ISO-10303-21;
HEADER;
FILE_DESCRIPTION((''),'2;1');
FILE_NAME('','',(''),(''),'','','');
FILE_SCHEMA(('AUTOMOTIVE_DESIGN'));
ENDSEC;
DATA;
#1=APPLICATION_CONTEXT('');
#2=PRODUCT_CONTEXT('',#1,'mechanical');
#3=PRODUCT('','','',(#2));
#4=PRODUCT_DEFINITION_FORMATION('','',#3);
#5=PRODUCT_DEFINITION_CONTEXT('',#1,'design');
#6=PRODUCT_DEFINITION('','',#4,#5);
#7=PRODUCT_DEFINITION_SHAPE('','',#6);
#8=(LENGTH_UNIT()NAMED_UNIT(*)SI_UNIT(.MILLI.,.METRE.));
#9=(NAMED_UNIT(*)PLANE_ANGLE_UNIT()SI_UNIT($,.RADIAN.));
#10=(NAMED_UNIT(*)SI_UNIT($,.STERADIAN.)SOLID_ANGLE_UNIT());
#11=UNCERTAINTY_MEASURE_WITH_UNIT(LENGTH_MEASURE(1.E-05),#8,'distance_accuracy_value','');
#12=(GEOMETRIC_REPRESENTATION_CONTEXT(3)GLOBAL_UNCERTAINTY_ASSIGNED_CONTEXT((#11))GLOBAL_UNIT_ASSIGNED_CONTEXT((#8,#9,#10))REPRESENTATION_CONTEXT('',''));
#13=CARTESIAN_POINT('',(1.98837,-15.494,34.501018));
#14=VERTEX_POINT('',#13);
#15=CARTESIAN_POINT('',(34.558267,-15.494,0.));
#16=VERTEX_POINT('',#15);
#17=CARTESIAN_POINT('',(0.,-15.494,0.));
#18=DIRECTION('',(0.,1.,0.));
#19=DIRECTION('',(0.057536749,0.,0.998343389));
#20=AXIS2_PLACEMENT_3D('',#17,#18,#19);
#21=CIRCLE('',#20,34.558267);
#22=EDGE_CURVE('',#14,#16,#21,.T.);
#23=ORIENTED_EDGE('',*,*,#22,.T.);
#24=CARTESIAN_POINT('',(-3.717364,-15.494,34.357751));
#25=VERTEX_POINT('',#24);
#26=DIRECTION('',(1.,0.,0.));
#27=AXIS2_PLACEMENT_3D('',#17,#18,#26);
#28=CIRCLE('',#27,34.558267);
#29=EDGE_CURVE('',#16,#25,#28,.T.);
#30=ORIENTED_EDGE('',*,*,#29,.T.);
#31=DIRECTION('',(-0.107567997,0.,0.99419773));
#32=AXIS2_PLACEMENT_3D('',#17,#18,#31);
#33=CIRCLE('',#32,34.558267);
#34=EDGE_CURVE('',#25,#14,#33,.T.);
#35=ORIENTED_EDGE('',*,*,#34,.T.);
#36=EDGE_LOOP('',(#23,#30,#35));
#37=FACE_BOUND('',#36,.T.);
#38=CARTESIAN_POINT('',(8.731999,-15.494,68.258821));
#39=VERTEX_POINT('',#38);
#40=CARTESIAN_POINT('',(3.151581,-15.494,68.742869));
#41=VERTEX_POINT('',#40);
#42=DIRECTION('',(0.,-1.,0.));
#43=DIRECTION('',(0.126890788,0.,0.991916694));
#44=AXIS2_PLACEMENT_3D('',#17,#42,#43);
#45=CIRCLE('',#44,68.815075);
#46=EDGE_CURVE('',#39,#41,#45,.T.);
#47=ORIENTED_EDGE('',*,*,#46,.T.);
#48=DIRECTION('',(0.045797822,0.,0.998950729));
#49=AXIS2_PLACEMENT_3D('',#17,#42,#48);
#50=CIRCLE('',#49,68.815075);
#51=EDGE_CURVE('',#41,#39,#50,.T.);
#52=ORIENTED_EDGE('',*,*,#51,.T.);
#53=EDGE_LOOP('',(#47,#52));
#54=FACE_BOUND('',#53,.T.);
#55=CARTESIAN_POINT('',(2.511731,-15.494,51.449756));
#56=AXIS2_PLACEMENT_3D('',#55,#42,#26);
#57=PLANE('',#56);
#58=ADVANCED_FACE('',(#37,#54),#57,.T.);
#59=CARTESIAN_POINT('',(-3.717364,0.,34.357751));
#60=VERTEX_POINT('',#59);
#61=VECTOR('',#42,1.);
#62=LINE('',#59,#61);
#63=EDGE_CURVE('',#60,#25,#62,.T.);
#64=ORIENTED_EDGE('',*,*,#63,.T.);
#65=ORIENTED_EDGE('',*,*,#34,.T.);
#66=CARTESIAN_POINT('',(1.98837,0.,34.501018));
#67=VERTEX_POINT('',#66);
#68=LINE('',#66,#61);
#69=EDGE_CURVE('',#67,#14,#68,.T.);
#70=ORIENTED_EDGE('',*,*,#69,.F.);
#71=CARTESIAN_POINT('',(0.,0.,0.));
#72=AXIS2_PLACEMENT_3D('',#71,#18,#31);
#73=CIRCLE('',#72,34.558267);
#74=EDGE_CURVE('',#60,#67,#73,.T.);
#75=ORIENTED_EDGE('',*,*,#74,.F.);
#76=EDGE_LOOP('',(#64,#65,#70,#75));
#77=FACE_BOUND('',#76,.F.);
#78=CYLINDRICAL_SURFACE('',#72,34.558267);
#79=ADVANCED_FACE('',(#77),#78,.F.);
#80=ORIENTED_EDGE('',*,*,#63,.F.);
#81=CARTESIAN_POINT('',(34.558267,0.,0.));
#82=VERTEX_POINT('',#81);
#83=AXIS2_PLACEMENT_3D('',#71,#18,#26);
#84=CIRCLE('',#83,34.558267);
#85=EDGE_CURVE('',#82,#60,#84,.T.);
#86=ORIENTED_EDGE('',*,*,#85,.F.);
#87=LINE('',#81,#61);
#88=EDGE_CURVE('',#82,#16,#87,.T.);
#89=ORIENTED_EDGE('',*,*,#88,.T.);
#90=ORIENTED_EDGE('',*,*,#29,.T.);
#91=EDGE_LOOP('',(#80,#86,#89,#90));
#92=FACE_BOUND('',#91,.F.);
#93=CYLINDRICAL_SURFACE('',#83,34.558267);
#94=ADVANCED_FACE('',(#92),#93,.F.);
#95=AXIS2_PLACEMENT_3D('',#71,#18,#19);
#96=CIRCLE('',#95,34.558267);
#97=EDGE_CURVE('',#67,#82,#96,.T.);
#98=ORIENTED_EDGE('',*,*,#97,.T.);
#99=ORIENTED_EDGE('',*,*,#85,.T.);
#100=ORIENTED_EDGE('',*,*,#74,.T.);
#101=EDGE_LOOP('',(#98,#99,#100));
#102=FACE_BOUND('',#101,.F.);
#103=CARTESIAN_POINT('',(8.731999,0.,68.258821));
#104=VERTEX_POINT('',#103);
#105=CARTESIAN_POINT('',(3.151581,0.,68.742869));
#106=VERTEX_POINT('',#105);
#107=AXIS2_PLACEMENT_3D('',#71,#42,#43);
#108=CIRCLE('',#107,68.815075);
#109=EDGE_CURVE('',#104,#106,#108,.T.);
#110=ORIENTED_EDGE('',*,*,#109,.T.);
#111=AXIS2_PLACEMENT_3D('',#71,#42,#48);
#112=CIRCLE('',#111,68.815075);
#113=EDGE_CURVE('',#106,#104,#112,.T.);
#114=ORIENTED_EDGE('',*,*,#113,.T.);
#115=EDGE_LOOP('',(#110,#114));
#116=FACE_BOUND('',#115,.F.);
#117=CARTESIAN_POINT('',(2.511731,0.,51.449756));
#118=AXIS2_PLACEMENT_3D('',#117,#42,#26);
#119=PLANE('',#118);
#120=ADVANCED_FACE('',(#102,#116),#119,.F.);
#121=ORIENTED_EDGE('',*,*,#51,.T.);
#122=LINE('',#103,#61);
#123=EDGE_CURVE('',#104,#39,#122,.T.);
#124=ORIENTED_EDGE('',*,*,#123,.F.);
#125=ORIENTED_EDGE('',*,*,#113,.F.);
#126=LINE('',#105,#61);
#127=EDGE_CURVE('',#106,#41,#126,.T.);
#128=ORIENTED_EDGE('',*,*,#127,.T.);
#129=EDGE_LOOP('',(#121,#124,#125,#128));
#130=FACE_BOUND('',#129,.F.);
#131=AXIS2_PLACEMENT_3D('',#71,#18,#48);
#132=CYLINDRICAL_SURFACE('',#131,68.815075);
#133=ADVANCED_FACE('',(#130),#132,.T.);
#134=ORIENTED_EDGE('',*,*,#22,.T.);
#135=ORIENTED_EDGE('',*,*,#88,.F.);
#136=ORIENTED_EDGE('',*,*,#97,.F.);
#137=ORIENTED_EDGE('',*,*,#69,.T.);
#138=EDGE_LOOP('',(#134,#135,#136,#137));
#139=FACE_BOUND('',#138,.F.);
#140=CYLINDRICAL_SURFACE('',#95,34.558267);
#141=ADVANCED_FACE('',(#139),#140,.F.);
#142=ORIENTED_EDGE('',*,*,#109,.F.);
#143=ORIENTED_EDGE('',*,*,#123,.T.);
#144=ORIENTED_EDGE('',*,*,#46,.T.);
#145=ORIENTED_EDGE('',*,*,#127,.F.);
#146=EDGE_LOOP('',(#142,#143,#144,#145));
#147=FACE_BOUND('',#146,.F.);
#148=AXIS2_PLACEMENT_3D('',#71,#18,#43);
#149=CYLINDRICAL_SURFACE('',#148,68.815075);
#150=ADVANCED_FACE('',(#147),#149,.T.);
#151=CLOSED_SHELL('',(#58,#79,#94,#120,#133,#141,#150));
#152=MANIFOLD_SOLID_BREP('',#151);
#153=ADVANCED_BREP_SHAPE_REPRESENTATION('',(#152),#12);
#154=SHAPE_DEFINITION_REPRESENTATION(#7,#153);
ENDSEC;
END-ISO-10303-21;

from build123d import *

# Parameters (mm, degrees)
F1_DEPTH = 15.494


# Not quite as in the source:
# - the program builds the solid bodies; features that only make, move or delete a surface that nothing else refers to are left out


with BuildPart() as f1:
    # F0 (on Front) → F1 (new body)
    with BuildSketch(Plane.XZ):
        with BuildLine():
            Line((1.9883703665, 34.5010177122), (8.7319990578, 68.2588214835))
            ThreePointArc((8.7319990578, 68.2588214835), (5.9467168888, 68.5576478309), (3.1515805748, 68.742869141))
            Line((3.1515805748, 68.742869141), (-3.7173636083, 34.3577509115))
            ThreePointArc((-3.7173636083, 34.3577509115), (-0.867459366, 34.5473783975), (1.9883703665, 34.5010177122))
        make_face()
        with BuildLine():
            ThreePointArc((3.1515805748, 68.742869141), (-49.7613844804, -47.5322956783), (68.8150747864, 0))
            ThreePointArc((68.8150747864, 0), (51.6546594513, 45.4676882503), (8.7319990578, 68.2588214835))
            Line((8.7319990578, 68.2588214835), (1.9883703665, 34.5010177122))
            ThreePointArc((1.9883703665, 34.5010177122), (25.1295490861, 23.7229762598), (34.5582673161, 0))
            ThreePointArc((34.5582673161, 0), (-23.0847156643, -25.717109919), (-3.7173636083, 34.3577509115))
            Line((-3.7173636083, 34.3577509115), (3.1515805748, 68.742869141))
        make_face()
    extrude(amount=F1_DEPTH)


solid = f1.part
